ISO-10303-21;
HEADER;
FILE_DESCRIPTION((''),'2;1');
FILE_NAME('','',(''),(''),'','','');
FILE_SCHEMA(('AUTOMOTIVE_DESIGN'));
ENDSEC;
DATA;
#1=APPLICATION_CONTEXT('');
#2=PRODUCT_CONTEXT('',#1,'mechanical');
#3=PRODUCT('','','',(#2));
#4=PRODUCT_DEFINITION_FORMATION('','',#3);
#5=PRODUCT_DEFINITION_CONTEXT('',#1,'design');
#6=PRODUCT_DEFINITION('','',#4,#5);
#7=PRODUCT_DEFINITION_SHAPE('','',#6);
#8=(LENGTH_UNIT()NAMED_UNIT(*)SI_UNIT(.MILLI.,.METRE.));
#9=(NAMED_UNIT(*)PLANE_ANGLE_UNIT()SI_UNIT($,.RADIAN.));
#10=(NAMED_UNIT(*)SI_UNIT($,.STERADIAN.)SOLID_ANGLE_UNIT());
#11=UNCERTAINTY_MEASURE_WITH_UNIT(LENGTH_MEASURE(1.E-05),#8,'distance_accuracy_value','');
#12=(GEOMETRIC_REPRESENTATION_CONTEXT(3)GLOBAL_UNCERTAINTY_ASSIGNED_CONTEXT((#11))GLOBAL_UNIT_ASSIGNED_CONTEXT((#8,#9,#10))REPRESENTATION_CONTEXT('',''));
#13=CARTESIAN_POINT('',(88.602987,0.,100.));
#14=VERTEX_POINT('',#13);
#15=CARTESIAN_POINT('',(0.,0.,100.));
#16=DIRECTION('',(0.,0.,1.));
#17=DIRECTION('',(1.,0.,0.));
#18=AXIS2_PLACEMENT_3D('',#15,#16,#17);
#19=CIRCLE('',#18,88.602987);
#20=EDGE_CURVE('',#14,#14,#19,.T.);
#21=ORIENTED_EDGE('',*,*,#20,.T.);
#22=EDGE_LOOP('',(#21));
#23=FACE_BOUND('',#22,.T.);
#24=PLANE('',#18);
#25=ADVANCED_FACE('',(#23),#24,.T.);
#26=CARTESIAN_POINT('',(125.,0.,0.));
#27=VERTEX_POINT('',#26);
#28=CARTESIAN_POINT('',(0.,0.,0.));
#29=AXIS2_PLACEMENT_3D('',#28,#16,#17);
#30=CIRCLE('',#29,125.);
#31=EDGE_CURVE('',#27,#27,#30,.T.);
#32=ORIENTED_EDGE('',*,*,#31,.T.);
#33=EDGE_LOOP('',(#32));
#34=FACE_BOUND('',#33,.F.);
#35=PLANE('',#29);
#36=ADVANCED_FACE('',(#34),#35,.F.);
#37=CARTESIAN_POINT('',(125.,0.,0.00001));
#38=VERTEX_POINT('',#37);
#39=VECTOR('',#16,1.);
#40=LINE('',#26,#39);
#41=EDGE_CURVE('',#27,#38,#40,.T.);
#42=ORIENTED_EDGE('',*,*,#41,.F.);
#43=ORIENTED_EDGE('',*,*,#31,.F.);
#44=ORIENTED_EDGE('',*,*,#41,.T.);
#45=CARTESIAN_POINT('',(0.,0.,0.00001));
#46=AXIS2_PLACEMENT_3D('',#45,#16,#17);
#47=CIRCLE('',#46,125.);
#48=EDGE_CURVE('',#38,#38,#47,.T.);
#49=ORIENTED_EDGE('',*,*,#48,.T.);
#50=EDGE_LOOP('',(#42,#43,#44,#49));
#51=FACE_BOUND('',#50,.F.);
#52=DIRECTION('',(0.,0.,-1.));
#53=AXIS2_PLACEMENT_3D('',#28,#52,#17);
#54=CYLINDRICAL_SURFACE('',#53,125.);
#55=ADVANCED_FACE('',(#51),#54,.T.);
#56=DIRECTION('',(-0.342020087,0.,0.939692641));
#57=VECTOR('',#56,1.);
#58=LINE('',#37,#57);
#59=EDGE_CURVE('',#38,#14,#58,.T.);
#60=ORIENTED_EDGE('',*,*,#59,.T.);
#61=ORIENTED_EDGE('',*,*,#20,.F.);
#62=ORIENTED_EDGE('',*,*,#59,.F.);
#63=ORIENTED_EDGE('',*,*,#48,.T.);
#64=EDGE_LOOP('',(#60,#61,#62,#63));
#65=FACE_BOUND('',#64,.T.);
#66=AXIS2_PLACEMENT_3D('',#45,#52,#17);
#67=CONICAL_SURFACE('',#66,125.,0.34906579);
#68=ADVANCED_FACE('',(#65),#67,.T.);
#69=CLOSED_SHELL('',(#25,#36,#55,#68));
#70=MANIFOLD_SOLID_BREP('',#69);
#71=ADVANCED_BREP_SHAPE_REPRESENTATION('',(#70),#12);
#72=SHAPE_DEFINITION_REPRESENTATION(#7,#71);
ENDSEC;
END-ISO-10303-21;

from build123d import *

# Parameters (mm, degrees)
F0_R     = 125
F1_DEPTH = 100
F2_SIZE2 = 36.397013
F2_SIZE  = 99.99999


# Not quite as in the source:
# - a fillet or chamfer is up to 0.001 mm smaller than in the source, because OpenCascade refuses the exact size


with BuildPart() as f1:
    # F0 (on Top) → F1 (new body)
    with BuildSketch(Plane.XY):
        Circle(F0_R)
    extrude(amount=F1_DEPTH)

    # F2 (size 100 and 36.3970234266 in the source; OpenCascade refuses exactly that, so slightly less here)
    f2_edges = [f1.edges().sort_by_distance(p)[0] for p in [
        (-125, 0, 100),
    ]]
    f2_side = f1.faces().sort_by_distance((-125, 0, 50))[0]
    chamfer(f2_edges, length=F2_SIZE, length2=F2_SIZE2, reference=f2_side)


solid = f1.part
